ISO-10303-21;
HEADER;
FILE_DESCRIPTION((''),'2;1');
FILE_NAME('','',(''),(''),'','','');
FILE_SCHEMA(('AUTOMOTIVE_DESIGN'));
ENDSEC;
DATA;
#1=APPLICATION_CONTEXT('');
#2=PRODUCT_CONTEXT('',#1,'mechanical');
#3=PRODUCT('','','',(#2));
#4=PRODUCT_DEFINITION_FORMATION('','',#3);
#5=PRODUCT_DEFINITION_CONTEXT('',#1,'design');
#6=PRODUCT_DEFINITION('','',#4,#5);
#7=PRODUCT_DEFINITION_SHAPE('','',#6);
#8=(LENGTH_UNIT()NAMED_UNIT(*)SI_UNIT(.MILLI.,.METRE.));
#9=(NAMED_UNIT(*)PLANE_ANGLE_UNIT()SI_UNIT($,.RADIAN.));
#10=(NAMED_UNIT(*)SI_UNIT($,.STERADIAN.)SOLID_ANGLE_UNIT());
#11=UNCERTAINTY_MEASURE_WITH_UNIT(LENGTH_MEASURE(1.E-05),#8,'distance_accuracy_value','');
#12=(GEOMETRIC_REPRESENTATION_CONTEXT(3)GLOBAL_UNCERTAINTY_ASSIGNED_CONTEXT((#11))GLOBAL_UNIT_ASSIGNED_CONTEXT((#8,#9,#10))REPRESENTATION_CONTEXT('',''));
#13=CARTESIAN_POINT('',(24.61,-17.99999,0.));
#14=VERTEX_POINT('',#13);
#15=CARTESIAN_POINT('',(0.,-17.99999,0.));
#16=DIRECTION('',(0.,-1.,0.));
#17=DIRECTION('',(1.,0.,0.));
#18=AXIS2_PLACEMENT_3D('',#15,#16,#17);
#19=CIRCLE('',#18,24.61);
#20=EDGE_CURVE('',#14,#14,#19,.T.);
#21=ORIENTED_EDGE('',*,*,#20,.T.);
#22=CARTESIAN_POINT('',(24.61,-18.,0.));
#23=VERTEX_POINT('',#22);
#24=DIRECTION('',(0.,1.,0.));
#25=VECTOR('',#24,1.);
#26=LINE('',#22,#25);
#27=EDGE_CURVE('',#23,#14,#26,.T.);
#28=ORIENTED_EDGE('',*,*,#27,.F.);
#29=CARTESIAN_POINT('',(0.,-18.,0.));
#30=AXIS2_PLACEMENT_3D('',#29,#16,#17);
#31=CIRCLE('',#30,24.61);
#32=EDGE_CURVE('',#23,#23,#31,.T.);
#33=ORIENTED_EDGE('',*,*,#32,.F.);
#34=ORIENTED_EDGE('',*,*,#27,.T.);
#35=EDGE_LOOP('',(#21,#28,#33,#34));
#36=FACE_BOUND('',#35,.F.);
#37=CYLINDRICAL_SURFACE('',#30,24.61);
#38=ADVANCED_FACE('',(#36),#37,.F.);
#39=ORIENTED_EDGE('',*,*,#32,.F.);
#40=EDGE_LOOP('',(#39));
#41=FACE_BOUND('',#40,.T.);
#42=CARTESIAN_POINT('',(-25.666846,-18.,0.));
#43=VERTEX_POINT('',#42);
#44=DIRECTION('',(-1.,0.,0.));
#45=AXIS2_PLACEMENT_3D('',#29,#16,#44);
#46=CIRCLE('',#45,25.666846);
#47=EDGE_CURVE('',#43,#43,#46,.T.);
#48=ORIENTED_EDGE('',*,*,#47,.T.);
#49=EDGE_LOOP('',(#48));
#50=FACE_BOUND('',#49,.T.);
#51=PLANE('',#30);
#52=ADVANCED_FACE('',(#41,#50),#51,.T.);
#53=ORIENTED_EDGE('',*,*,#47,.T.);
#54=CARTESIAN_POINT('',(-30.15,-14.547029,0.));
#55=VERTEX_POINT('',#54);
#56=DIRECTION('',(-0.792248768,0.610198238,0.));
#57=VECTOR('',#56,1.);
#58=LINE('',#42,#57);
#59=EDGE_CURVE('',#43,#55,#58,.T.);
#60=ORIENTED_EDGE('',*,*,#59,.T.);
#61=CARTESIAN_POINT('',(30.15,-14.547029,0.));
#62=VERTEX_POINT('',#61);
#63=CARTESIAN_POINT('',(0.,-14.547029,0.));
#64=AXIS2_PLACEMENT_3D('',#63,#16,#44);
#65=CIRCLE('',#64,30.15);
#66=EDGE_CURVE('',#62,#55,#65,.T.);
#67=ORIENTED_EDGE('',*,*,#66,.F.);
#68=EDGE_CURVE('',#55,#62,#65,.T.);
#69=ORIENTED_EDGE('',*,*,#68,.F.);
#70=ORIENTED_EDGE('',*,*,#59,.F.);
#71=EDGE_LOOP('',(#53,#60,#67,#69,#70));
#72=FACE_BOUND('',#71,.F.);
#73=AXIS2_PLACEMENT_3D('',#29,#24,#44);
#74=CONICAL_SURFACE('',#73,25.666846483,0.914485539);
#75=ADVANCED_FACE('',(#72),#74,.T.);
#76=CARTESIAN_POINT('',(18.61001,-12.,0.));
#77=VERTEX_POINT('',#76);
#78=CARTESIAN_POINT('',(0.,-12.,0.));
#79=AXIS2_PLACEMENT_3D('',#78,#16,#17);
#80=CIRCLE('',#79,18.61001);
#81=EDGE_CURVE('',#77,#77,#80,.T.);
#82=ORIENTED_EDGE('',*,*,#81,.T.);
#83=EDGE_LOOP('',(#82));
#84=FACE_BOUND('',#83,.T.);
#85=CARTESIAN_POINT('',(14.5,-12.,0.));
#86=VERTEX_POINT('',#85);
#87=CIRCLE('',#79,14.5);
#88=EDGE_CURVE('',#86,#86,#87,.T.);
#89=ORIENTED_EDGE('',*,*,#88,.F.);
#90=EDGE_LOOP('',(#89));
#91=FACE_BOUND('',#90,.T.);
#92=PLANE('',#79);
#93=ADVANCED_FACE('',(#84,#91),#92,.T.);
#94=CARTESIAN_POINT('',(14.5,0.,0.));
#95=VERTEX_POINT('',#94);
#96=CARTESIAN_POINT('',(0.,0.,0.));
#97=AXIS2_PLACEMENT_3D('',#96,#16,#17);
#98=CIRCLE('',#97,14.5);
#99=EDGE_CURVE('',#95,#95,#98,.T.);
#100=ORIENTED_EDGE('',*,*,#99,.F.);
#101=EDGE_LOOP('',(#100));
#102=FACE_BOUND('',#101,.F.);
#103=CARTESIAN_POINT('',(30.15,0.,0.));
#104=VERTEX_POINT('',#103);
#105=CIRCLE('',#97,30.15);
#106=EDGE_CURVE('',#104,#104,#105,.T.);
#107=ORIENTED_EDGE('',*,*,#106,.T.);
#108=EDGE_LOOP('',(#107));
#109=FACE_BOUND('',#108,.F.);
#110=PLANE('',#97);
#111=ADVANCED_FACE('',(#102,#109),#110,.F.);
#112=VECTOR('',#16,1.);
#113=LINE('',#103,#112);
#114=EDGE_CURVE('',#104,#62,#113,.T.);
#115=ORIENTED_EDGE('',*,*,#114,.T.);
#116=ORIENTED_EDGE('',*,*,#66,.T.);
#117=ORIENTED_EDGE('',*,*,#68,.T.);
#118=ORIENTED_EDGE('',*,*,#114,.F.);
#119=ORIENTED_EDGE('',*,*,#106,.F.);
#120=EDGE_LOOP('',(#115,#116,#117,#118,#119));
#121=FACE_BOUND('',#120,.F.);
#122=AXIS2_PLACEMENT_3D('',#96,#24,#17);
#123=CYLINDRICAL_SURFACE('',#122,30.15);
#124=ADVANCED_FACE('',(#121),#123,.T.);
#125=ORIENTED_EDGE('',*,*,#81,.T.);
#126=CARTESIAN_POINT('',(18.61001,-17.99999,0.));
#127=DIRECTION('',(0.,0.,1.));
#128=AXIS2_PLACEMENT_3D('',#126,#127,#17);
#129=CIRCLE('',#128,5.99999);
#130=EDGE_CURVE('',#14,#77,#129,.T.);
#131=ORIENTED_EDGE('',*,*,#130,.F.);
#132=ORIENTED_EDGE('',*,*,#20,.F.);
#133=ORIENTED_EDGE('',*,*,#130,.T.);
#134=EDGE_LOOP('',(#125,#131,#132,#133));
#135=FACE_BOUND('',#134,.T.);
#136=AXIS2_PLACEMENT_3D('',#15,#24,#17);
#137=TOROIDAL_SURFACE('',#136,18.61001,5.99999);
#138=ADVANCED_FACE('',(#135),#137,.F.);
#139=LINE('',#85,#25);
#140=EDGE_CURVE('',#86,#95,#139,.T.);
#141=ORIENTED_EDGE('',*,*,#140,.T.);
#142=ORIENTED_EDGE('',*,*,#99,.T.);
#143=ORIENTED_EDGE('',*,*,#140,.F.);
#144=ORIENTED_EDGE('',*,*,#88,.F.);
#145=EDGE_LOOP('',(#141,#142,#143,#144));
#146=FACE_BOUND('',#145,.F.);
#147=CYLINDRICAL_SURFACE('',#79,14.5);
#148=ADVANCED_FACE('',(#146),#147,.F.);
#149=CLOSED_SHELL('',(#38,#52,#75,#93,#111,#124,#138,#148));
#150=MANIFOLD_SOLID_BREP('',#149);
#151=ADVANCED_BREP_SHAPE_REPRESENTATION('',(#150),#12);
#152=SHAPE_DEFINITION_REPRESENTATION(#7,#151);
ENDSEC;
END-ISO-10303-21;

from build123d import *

# Parameters (mm, degrees)
F0_R     = 30.15
F1_DEPTH = 18
F2_R     = 24.61
F3_DEPTH = 6
F4_R     = 5.99999
F5_R     = 14.5
F6_DEPTH = 25


# Not quite as in the source:
# - a fillet or chamfer is up to 0.001 mm smaller than in the source, because OpenCascade refuses the exact size


with BuildPart() as f1:
    # F0 (on Front) → F1 (new body)
    with BuildSketch(Plane.XZ):
        Circle(F0_R)
    extrude(amount=F1_DEPTH)

    # F2 (on face) → F3 (cut)
    with BuildSketch(Plane.XZ.offset(18)):
        Circle(F2_R)
    extrude(amount=-F3_DEPTH, mode=Mode.SUBTRACT)

    # F4 (radius 6 in the source; OpenCascade refuses exactly that, so slightly less here)
    f4_edges = [f1.edges().sort_by_distance(p)[0] for p in [
        (-24.61, -12, 0),
    ]]
    fillet(f4_edges, radius=F4_R)

    # F5 (on face) → F6 (cut)
    with BuildSketch(Plane.XZ.offset(12)):
        Circle(F5_R)
    extrude(amount=-F6_DEPTH, mode=Mode.SUBTRACT)

    # F7 (on Top) → F8 (revolve, cut)
    with BuildSketch(Plane.XY):
        Polygon((-30.15, -18), (-25.6668464834, -18), (-30.15, -14.5470285541), align=None)
    revolve(axis=Axis((0, -2.2485724185, 0), (0, -1, 0)), mode=Mode.SUBTRACT)


solid = f1.part
